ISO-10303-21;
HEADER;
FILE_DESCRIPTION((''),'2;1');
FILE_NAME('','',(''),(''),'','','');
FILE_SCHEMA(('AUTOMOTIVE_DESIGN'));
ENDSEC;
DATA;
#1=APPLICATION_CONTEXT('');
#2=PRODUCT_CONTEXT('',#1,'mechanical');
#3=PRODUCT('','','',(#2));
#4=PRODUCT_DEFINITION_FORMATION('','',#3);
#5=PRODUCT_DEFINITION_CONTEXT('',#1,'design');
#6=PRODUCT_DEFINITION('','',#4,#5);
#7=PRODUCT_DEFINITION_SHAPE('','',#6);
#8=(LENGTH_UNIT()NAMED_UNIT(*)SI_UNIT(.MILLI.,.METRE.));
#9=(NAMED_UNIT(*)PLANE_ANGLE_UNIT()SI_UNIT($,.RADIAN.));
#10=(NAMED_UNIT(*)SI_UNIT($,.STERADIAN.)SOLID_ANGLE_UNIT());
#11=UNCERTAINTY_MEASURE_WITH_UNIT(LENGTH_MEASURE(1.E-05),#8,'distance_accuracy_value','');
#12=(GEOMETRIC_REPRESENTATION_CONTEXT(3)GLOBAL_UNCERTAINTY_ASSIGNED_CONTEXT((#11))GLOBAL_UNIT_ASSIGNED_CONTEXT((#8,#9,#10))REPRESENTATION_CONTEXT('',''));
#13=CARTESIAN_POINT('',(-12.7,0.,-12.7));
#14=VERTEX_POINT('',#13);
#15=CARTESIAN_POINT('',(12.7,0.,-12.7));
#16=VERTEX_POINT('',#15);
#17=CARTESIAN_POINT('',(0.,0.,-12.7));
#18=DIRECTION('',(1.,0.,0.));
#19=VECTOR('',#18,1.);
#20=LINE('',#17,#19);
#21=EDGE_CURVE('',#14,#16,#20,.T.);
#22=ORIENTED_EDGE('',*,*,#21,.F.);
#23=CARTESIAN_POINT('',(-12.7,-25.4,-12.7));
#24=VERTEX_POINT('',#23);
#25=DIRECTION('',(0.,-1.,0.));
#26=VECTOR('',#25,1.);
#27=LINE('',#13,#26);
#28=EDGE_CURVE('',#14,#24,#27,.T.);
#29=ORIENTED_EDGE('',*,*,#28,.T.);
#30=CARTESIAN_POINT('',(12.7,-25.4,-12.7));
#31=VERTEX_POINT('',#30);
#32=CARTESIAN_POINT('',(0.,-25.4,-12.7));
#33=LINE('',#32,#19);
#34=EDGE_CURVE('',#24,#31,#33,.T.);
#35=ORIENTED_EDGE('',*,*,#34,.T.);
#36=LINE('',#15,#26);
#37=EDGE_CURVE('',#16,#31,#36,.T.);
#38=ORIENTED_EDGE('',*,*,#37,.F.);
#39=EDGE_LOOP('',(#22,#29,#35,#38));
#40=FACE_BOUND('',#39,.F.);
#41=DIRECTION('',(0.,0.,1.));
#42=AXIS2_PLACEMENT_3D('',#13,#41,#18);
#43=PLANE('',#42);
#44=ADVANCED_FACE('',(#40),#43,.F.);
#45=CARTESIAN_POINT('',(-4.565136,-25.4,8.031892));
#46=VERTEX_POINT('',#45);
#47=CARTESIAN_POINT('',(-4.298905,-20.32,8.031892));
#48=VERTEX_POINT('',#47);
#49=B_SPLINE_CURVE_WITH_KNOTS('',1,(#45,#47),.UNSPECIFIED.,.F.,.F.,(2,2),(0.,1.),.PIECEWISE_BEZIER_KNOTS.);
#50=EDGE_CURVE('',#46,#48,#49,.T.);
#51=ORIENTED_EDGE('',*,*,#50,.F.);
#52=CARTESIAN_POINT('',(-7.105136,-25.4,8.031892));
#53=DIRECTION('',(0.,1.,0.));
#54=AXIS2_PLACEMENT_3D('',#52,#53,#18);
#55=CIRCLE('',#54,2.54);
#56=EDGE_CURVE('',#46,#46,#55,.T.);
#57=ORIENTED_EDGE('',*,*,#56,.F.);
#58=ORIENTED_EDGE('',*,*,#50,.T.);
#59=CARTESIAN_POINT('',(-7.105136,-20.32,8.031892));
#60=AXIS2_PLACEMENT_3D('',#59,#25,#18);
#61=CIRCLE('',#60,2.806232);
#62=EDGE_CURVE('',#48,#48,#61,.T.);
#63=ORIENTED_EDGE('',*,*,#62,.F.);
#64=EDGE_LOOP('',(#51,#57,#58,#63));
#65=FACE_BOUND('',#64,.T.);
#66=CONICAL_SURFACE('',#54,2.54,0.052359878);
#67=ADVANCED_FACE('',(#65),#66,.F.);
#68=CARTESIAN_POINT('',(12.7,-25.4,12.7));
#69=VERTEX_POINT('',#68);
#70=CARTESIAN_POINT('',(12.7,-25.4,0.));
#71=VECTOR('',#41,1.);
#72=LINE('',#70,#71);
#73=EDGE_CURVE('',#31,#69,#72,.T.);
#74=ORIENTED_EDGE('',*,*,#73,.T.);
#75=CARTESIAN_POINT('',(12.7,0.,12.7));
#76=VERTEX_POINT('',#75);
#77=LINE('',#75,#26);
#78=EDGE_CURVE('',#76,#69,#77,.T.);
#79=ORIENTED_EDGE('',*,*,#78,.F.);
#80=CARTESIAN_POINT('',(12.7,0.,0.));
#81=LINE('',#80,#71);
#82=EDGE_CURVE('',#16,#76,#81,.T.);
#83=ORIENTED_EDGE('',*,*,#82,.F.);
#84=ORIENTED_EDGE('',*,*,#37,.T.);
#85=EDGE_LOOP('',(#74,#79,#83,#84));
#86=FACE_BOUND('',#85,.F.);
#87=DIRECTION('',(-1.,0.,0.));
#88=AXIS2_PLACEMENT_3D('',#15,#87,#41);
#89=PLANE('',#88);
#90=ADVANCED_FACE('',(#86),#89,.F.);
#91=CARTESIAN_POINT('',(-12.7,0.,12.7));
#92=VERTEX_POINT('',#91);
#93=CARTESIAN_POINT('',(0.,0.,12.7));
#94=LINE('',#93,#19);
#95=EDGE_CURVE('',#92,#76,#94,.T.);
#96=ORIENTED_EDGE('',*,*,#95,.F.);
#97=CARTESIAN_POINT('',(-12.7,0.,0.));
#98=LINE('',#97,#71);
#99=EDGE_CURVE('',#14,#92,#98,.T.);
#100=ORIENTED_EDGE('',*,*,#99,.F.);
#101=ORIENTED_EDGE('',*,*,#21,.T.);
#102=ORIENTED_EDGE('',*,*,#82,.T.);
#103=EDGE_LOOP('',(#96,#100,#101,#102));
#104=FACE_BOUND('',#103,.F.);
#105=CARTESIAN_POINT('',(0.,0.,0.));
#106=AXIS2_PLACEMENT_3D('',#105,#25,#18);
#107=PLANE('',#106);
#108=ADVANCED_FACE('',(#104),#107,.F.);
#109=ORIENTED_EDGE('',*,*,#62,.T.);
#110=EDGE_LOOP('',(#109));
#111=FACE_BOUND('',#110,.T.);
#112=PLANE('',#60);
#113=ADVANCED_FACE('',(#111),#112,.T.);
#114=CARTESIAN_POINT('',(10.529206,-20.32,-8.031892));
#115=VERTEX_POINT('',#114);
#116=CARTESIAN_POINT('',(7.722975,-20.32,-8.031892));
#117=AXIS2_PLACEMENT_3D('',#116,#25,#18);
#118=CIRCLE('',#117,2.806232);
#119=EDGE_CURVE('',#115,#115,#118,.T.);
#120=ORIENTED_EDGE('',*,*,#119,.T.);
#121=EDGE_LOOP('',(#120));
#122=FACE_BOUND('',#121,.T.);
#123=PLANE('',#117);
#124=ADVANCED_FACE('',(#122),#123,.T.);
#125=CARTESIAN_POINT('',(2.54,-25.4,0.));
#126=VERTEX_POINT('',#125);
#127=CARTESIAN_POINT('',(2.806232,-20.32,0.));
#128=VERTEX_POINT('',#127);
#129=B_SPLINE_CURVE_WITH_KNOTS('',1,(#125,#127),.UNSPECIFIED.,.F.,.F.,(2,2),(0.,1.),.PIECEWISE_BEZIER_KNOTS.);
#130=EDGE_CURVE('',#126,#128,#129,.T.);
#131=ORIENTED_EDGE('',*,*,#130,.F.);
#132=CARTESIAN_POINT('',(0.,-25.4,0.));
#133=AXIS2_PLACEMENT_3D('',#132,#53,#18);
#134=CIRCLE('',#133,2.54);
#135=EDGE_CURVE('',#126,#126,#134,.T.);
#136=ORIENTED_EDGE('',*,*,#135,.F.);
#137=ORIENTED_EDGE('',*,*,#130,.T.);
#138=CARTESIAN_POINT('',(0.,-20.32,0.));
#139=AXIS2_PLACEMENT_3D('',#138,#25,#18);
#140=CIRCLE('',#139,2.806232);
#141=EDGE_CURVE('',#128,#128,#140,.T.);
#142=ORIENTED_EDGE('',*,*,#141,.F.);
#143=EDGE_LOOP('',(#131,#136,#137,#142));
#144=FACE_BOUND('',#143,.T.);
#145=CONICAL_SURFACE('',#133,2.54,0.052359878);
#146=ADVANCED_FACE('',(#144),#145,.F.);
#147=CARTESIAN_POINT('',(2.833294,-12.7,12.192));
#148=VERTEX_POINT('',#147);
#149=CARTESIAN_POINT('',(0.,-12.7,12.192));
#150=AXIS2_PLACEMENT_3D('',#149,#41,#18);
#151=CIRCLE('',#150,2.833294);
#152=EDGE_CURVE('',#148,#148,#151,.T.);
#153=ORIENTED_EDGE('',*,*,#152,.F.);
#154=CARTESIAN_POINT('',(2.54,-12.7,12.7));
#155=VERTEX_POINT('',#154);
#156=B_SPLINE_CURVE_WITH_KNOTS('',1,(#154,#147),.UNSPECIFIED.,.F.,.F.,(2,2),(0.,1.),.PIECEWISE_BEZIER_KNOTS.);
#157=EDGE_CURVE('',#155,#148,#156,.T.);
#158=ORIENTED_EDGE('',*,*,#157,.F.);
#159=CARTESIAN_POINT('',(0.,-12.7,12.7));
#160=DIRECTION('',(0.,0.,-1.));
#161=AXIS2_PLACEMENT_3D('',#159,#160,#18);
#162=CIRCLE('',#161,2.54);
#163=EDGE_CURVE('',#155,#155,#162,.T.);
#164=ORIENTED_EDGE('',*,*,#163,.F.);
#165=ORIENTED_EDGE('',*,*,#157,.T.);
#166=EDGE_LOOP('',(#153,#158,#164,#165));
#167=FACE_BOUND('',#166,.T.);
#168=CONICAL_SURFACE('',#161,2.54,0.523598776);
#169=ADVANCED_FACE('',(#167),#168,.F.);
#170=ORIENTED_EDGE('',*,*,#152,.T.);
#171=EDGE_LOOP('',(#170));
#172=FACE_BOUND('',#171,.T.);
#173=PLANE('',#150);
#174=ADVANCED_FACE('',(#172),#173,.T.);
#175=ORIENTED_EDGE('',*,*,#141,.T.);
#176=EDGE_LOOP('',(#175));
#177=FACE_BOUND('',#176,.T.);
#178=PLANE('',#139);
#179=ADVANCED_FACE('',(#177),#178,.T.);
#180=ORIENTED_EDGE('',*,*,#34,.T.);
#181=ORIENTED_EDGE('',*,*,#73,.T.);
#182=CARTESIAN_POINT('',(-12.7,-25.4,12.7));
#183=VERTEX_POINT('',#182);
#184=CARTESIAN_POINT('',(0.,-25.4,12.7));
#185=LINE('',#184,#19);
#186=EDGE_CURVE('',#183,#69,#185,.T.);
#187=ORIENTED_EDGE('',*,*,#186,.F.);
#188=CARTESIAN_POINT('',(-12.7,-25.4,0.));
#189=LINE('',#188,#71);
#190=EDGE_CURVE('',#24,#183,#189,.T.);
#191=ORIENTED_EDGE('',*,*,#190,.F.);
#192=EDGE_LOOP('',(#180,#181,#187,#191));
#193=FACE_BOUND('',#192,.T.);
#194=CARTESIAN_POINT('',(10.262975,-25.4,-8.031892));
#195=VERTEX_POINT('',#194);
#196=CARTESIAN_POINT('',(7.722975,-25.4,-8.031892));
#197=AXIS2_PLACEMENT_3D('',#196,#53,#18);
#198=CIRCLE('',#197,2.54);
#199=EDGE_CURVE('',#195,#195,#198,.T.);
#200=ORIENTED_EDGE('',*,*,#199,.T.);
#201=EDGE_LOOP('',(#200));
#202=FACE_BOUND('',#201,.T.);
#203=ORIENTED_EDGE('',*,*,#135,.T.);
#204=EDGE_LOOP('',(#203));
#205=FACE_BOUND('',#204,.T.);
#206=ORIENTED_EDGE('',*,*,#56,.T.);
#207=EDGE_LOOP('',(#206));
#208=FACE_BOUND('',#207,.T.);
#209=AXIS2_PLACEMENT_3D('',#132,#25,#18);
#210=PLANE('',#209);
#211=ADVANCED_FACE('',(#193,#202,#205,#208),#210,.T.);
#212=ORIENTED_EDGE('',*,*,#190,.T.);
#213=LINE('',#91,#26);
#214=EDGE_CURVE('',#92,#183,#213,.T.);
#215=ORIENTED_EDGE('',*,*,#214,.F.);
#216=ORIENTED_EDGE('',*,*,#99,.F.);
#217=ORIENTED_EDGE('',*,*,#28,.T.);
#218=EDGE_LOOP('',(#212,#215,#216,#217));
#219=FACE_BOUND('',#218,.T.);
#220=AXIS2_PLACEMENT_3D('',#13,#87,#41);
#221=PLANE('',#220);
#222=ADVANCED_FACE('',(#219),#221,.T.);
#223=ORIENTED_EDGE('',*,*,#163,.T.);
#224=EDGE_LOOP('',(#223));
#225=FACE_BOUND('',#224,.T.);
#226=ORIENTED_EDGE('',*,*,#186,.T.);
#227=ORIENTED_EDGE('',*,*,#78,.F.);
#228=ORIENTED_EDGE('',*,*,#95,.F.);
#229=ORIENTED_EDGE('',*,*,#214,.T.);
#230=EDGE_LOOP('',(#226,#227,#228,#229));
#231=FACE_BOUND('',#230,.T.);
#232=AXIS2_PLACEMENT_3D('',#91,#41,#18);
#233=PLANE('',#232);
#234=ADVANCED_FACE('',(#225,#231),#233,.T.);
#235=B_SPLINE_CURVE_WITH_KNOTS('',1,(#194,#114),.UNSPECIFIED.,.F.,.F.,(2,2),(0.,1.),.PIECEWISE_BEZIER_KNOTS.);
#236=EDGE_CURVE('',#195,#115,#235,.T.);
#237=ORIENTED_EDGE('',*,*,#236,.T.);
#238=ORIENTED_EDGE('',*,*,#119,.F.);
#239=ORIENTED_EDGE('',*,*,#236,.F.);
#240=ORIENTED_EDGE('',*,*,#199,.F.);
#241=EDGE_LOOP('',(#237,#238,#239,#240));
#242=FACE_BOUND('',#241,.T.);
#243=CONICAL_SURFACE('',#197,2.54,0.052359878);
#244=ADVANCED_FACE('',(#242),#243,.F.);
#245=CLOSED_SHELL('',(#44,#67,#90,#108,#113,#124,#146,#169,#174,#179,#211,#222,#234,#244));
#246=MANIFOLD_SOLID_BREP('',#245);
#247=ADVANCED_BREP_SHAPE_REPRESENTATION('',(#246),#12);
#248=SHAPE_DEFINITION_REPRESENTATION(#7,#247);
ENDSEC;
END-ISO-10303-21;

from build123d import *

# Parameters (mm, degrees)
F0_W     = 25.4
F0_H     = 25.4
F1_DEPTH = 25.4
F2_R     = 2.54
F3_DEPTH = 0.508
F3_TAPER = -30
F4_R     = 2.54
F5_DEPTH = 5.08
F5_TAPER = -3


# Not quite as in the source:
# - the program builds the solid bodies; features that only make, move or delete a surface that nothing else refers to are left out


with BuildPart() as f1:
    # F0 (on Front) → F1 (new body)
    with BuildSketch(Plane.XZ):
        Rectangle(F0_W, F0_H)
    extrude(amount=F1_DEPTH)

    # F2 (on face) → F3 (cut)
    with BuildSketch(Plane.XY.offset(12.7)):
        with Locations((0, -12.7)):
            Circle(F2_R)
    extrude(amount=-F3_DEPTH, taper=F3_TAPER, mode=Mode.SUBTRACT)

    # F4 (on face) → F5 (cut)
    with BuildSketch(Plane.XZ.offset(25.4)):
        Circle(F4_R)
        with Locations((-7.1051362902, 8.0318916589)):
            Circle(F4_R)
        with Locations((7.7229747549, -8.0318916589)):
            Circle(F4_R)
    extrude(amount=-F5_DEPTH, taper=F5_TAPER, mode=Mode.SUBTRACT)


solid = f1.part
